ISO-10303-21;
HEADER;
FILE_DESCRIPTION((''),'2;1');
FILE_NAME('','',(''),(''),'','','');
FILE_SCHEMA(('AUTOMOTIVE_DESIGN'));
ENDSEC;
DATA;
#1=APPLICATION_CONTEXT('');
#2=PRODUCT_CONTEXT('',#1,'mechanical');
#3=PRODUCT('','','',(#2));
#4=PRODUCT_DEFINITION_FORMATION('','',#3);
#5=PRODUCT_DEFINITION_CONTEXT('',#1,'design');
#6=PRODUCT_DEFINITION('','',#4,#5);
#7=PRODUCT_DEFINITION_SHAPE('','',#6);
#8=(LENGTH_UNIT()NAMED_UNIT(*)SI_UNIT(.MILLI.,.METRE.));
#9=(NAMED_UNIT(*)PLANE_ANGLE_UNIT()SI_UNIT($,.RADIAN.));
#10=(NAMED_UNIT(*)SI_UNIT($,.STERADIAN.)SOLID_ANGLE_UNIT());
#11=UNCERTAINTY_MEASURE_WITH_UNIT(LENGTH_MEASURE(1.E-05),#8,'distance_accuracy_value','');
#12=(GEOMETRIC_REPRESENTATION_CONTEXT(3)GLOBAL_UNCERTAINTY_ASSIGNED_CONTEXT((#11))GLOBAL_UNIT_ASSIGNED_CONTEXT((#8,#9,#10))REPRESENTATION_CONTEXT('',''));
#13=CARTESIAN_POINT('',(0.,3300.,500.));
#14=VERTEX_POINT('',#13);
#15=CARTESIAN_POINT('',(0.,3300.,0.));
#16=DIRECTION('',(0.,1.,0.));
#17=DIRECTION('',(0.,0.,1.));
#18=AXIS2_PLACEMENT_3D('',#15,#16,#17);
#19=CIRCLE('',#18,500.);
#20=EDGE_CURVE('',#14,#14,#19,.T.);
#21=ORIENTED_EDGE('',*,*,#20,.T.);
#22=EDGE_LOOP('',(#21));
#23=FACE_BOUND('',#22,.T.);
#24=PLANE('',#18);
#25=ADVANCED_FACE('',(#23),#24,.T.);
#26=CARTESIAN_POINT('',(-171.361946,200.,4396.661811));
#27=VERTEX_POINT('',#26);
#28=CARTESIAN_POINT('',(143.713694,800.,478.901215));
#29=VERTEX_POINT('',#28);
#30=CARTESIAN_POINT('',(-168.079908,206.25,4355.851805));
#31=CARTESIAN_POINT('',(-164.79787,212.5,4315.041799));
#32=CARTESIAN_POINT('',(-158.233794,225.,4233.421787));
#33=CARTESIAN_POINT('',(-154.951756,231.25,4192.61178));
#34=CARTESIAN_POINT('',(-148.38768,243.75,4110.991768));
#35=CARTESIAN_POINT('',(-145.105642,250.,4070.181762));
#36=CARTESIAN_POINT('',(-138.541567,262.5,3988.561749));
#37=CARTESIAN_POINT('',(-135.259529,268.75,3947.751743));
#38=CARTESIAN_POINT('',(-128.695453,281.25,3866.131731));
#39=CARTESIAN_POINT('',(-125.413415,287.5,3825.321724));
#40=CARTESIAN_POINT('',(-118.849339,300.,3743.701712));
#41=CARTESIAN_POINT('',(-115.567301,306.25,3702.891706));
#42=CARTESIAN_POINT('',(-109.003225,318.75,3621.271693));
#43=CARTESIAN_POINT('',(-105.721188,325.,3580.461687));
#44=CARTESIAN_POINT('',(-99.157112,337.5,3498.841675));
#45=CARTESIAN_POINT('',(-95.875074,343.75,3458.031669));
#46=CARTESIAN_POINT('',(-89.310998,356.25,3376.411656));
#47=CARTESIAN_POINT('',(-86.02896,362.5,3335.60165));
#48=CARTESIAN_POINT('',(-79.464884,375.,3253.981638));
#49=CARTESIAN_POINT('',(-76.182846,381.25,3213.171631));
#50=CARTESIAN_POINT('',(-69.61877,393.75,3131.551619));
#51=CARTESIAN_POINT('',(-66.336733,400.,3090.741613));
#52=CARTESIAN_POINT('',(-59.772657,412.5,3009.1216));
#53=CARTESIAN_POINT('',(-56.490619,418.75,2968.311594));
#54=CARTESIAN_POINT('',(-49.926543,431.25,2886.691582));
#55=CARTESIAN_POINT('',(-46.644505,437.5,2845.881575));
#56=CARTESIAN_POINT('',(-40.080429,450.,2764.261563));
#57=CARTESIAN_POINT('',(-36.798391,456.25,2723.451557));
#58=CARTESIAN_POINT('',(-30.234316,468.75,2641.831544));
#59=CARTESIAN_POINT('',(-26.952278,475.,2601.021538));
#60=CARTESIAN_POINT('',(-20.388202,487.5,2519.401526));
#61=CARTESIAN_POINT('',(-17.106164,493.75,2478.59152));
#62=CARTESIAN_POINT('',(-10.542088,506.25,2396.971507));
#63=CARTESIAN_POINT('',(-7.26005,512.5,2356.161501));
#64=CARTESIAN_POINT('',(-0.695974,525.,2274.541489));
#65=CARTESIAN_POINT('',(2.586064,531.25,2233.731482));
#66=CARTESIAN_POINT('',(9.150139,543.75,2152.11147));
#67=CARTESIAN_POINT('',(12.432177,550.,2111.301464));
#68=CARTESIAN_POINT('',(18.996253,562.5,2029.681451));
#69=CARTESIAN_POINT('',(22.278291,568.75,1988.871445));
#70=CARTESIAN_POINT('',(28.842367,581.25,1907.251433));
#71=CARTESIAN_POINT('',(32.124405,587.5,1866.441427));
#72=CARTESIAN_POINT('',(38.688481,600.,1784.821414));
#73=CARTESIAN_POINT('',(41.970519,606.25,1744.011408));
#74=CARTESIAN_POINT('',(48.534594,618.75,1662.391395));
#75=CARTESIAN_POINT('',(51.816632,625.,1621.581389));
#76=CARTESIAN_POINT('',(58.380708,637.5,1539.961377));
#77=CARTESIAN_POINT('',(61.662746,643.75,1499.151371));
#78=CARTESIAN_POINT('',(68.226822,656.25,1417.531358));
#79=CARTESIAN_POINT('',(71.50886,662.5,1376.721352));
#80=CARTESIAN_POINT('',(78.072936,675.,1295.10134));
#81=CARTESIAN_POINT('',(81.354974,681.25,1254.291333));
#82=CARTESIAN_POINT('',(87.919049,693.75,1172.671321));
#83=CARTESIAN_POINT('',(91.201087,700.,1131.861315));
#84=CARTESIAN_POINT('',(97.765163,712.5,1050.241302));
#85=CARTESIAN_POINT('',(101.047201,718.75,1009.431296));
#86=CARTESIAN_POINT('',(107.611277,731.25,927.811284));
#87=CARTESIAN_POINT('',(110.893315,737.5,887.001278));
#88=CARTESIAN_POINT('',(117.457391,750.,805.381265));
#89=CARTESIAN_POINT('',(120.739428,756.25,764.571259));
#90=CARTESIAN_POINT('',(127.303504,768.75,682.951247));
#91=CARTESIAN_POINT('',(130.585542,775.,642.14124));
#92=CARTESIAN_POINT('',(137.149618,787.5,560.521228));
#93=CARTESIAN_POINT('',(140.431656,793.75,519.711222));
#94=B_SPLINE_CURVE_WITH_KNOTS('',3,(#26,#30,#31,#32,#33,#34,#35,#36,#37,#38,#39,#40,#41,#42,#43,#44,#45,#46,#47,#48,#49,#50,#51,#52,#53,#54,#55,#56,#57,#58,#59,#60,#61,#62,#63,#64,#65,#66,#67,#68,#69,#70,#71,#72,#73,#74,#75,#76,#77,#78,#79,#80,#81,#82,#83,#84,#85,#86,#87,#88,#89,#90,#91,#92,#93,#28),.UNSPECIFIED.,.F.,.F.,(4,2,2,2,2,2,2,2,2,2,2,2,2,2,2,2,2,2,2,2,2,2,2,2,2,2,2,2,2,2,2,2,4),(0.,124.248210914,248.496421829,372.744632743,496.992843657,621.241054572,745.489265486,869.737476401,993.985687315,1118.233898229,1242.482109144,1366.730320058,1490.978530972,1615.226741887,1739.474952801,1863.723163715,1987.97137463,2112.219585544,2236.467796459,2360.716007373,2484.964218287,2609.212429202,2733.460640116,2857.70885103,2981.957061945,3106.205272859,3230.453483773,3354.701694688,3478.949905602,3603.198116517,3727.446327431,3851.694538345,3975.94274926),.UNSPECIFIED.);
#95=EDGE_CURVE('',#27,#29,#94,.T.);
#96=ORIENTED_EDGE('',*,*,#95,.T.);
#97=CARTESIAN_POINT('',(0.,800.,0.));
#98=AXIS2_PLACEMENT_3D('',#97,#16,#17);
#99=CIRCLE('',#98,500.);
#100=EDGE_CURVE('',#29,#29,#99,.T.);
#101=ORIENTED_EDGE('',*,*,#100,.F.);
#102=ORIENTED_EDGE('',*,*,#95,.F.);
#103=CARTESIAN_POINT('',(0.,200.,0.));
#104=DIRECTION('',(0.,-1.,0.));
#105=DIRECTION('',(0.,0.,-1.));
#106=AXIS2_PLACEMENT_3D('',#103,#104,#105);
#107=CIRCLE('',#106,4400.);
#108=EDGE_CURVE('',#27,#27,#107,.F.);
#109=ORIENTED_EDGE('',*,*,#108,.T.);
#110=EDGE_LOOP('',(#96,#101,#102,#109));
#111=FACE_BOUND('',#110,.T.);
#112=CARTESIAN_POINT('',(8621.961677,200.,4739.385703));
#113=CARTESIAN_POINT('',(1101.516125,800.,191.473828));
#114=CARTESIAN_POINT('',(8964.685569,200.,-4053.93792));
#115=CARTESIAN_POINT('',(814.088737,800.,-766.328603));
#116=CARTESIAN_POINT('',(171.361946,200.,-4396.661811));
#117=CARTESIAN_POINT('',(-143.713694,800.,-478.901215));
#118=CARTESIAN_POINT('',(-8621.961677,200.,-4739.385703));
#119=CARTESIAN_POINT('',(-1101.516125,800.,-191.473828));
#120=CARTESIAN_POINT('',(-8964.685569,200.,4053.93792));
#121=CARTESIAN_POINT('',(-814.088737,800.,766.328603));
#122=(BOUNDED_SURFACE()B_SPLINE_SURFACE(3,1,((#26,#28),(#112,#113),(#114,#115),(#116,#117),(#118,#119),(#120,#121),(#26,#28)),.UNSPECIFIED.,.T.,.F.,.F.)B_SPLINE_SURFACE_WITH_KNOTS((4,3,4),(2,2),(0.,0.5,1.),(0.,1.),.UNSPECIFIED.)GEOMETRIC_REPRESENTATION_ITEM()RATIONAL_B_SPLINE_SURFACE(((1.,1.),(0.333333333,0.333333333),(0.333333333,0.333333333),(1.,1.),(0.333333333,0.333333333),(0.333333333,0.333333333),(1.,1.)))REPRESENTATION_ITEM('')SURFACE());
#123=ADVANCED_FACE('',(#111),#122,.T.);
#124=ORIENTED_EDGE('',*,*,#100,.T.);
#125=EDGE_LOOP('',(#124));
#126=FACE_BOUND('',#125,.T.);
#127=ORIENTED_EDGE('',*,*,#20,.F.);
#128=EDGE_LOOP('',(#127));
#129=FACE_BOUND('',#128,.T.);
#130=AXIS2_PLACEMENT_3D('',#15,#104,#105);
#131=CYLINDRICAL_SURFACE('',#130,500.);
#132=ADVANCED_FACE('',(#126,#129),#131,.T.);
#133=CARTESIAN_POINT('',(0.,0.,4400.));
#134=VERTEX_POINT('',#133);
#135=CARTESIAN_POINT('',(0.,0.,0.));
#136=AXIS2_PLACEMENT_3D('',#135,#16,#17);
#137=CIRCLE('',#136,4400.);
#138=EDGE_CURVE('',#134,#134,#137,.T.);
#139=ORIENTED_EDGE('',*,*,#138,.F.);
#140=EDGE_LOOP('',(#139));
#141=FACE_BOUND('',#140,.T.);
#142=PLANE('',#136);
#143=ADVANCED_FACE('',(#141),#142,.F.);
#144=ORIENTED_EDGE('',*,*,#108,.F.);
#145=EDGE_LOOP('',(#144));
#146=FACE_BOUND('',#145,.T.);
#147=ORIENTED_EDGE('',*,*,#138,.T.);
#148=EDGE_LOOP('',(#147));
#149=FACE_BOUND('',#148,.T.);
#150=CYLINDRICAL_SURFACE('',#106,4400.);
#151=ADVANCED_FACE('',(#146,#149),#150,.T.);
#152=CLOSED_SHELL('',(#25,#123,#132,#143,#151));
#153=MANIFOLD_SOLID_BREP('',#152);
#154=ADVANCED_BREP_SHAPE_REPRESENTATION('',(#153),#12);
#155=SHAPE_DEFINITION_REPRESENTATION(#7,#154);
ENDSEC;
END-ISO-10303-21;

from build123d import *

# Parameters (mm, degrees)
SKETCH1_R           = 4400
BOSS_EXTRUDE1_DEPTH = 200
SKETCH3_R           = 500
BOSS_EXTRUDE2_DEPTH = 2500


with BuildPart() as part:
    # Sketch1 → Boss-Extrude1 (new body)
    with BuildSketch(Plane(origin=(0, 0, 0), x_dir=(1, 0, 0), z_dir=(0, 1, 0))):
        with Locations(Location((0, 0, 0), (0, 0, 270))):
            Circle(SKETCH1_R)
    extrude(amount=BOSS_EXTRUDE1_DEPTH)

    # Loft1: read off the stored shape, not the designer's step
    # Loft1: loft between two sections, ruled curve by curve
    loft1_from = [
        Edge.make_bspline([(-171.361945774, 200, 4396.661811368), (8621.961676961, 200, 4739.385702916), (8964.68556851, 200, -4053.937919819), (171.361945774, 200, -4396.661811368), (-8621.961676961, 200, -4739.385702916), (-8964.68556851, 200, 4053.937919819), (-171.361945774, 200, 4396.661811368)], [0, 0, 0, 0, 0.5, 0.5, 0.5, 1, 1, 1, 1], 3, [1, 0.333333333, 0.333333333, 1, 0.333333333, 0.333333333, 1]),
    ]
    loft1_to = [
        Edge.make_bspline([(143.713693887, 800, 478.901215481), (1101.516124849, 800, 191.473827707), (814.088737075, 800, -766.328603255), (-143.713693887, 800, -478.901215481), (-1101.516124849, 800, -191.473827707), (-814.088737075, 800, 766.328603255), (143.713693887, 800, 478.901215481)], [0, 0, 0, 0, 0.5, 0.5, 0.5, 1, 1, 1, 1], 3, [1, 0.333333333, 0.333333333, 1, 0.333333333, 0.333333333, 1]),
    ]
    loft1 = Solid(Shell([*[Face.make_surface_from_curves(loft1_from[k], loft1_to[k]) for k in range(1)], Face(Wire(loft1_from)), Face(Wire(loft1_to))]))
    add(loft1)

    # Sketch3 → Boss-Extrude2 (add)
    with BuildSketch(Plane(origin=(0, 800, 0), x_dir=(1, 0, 0), z_dir=(0, 1, 0))):
        with Locations(Location((0, 0, 0), (0, 0, 286.704))):
            Circle(SKETCH3_R)
    extrude(amount=BOSS_EXTRUDE2_DEPTH)


solid = part.part
